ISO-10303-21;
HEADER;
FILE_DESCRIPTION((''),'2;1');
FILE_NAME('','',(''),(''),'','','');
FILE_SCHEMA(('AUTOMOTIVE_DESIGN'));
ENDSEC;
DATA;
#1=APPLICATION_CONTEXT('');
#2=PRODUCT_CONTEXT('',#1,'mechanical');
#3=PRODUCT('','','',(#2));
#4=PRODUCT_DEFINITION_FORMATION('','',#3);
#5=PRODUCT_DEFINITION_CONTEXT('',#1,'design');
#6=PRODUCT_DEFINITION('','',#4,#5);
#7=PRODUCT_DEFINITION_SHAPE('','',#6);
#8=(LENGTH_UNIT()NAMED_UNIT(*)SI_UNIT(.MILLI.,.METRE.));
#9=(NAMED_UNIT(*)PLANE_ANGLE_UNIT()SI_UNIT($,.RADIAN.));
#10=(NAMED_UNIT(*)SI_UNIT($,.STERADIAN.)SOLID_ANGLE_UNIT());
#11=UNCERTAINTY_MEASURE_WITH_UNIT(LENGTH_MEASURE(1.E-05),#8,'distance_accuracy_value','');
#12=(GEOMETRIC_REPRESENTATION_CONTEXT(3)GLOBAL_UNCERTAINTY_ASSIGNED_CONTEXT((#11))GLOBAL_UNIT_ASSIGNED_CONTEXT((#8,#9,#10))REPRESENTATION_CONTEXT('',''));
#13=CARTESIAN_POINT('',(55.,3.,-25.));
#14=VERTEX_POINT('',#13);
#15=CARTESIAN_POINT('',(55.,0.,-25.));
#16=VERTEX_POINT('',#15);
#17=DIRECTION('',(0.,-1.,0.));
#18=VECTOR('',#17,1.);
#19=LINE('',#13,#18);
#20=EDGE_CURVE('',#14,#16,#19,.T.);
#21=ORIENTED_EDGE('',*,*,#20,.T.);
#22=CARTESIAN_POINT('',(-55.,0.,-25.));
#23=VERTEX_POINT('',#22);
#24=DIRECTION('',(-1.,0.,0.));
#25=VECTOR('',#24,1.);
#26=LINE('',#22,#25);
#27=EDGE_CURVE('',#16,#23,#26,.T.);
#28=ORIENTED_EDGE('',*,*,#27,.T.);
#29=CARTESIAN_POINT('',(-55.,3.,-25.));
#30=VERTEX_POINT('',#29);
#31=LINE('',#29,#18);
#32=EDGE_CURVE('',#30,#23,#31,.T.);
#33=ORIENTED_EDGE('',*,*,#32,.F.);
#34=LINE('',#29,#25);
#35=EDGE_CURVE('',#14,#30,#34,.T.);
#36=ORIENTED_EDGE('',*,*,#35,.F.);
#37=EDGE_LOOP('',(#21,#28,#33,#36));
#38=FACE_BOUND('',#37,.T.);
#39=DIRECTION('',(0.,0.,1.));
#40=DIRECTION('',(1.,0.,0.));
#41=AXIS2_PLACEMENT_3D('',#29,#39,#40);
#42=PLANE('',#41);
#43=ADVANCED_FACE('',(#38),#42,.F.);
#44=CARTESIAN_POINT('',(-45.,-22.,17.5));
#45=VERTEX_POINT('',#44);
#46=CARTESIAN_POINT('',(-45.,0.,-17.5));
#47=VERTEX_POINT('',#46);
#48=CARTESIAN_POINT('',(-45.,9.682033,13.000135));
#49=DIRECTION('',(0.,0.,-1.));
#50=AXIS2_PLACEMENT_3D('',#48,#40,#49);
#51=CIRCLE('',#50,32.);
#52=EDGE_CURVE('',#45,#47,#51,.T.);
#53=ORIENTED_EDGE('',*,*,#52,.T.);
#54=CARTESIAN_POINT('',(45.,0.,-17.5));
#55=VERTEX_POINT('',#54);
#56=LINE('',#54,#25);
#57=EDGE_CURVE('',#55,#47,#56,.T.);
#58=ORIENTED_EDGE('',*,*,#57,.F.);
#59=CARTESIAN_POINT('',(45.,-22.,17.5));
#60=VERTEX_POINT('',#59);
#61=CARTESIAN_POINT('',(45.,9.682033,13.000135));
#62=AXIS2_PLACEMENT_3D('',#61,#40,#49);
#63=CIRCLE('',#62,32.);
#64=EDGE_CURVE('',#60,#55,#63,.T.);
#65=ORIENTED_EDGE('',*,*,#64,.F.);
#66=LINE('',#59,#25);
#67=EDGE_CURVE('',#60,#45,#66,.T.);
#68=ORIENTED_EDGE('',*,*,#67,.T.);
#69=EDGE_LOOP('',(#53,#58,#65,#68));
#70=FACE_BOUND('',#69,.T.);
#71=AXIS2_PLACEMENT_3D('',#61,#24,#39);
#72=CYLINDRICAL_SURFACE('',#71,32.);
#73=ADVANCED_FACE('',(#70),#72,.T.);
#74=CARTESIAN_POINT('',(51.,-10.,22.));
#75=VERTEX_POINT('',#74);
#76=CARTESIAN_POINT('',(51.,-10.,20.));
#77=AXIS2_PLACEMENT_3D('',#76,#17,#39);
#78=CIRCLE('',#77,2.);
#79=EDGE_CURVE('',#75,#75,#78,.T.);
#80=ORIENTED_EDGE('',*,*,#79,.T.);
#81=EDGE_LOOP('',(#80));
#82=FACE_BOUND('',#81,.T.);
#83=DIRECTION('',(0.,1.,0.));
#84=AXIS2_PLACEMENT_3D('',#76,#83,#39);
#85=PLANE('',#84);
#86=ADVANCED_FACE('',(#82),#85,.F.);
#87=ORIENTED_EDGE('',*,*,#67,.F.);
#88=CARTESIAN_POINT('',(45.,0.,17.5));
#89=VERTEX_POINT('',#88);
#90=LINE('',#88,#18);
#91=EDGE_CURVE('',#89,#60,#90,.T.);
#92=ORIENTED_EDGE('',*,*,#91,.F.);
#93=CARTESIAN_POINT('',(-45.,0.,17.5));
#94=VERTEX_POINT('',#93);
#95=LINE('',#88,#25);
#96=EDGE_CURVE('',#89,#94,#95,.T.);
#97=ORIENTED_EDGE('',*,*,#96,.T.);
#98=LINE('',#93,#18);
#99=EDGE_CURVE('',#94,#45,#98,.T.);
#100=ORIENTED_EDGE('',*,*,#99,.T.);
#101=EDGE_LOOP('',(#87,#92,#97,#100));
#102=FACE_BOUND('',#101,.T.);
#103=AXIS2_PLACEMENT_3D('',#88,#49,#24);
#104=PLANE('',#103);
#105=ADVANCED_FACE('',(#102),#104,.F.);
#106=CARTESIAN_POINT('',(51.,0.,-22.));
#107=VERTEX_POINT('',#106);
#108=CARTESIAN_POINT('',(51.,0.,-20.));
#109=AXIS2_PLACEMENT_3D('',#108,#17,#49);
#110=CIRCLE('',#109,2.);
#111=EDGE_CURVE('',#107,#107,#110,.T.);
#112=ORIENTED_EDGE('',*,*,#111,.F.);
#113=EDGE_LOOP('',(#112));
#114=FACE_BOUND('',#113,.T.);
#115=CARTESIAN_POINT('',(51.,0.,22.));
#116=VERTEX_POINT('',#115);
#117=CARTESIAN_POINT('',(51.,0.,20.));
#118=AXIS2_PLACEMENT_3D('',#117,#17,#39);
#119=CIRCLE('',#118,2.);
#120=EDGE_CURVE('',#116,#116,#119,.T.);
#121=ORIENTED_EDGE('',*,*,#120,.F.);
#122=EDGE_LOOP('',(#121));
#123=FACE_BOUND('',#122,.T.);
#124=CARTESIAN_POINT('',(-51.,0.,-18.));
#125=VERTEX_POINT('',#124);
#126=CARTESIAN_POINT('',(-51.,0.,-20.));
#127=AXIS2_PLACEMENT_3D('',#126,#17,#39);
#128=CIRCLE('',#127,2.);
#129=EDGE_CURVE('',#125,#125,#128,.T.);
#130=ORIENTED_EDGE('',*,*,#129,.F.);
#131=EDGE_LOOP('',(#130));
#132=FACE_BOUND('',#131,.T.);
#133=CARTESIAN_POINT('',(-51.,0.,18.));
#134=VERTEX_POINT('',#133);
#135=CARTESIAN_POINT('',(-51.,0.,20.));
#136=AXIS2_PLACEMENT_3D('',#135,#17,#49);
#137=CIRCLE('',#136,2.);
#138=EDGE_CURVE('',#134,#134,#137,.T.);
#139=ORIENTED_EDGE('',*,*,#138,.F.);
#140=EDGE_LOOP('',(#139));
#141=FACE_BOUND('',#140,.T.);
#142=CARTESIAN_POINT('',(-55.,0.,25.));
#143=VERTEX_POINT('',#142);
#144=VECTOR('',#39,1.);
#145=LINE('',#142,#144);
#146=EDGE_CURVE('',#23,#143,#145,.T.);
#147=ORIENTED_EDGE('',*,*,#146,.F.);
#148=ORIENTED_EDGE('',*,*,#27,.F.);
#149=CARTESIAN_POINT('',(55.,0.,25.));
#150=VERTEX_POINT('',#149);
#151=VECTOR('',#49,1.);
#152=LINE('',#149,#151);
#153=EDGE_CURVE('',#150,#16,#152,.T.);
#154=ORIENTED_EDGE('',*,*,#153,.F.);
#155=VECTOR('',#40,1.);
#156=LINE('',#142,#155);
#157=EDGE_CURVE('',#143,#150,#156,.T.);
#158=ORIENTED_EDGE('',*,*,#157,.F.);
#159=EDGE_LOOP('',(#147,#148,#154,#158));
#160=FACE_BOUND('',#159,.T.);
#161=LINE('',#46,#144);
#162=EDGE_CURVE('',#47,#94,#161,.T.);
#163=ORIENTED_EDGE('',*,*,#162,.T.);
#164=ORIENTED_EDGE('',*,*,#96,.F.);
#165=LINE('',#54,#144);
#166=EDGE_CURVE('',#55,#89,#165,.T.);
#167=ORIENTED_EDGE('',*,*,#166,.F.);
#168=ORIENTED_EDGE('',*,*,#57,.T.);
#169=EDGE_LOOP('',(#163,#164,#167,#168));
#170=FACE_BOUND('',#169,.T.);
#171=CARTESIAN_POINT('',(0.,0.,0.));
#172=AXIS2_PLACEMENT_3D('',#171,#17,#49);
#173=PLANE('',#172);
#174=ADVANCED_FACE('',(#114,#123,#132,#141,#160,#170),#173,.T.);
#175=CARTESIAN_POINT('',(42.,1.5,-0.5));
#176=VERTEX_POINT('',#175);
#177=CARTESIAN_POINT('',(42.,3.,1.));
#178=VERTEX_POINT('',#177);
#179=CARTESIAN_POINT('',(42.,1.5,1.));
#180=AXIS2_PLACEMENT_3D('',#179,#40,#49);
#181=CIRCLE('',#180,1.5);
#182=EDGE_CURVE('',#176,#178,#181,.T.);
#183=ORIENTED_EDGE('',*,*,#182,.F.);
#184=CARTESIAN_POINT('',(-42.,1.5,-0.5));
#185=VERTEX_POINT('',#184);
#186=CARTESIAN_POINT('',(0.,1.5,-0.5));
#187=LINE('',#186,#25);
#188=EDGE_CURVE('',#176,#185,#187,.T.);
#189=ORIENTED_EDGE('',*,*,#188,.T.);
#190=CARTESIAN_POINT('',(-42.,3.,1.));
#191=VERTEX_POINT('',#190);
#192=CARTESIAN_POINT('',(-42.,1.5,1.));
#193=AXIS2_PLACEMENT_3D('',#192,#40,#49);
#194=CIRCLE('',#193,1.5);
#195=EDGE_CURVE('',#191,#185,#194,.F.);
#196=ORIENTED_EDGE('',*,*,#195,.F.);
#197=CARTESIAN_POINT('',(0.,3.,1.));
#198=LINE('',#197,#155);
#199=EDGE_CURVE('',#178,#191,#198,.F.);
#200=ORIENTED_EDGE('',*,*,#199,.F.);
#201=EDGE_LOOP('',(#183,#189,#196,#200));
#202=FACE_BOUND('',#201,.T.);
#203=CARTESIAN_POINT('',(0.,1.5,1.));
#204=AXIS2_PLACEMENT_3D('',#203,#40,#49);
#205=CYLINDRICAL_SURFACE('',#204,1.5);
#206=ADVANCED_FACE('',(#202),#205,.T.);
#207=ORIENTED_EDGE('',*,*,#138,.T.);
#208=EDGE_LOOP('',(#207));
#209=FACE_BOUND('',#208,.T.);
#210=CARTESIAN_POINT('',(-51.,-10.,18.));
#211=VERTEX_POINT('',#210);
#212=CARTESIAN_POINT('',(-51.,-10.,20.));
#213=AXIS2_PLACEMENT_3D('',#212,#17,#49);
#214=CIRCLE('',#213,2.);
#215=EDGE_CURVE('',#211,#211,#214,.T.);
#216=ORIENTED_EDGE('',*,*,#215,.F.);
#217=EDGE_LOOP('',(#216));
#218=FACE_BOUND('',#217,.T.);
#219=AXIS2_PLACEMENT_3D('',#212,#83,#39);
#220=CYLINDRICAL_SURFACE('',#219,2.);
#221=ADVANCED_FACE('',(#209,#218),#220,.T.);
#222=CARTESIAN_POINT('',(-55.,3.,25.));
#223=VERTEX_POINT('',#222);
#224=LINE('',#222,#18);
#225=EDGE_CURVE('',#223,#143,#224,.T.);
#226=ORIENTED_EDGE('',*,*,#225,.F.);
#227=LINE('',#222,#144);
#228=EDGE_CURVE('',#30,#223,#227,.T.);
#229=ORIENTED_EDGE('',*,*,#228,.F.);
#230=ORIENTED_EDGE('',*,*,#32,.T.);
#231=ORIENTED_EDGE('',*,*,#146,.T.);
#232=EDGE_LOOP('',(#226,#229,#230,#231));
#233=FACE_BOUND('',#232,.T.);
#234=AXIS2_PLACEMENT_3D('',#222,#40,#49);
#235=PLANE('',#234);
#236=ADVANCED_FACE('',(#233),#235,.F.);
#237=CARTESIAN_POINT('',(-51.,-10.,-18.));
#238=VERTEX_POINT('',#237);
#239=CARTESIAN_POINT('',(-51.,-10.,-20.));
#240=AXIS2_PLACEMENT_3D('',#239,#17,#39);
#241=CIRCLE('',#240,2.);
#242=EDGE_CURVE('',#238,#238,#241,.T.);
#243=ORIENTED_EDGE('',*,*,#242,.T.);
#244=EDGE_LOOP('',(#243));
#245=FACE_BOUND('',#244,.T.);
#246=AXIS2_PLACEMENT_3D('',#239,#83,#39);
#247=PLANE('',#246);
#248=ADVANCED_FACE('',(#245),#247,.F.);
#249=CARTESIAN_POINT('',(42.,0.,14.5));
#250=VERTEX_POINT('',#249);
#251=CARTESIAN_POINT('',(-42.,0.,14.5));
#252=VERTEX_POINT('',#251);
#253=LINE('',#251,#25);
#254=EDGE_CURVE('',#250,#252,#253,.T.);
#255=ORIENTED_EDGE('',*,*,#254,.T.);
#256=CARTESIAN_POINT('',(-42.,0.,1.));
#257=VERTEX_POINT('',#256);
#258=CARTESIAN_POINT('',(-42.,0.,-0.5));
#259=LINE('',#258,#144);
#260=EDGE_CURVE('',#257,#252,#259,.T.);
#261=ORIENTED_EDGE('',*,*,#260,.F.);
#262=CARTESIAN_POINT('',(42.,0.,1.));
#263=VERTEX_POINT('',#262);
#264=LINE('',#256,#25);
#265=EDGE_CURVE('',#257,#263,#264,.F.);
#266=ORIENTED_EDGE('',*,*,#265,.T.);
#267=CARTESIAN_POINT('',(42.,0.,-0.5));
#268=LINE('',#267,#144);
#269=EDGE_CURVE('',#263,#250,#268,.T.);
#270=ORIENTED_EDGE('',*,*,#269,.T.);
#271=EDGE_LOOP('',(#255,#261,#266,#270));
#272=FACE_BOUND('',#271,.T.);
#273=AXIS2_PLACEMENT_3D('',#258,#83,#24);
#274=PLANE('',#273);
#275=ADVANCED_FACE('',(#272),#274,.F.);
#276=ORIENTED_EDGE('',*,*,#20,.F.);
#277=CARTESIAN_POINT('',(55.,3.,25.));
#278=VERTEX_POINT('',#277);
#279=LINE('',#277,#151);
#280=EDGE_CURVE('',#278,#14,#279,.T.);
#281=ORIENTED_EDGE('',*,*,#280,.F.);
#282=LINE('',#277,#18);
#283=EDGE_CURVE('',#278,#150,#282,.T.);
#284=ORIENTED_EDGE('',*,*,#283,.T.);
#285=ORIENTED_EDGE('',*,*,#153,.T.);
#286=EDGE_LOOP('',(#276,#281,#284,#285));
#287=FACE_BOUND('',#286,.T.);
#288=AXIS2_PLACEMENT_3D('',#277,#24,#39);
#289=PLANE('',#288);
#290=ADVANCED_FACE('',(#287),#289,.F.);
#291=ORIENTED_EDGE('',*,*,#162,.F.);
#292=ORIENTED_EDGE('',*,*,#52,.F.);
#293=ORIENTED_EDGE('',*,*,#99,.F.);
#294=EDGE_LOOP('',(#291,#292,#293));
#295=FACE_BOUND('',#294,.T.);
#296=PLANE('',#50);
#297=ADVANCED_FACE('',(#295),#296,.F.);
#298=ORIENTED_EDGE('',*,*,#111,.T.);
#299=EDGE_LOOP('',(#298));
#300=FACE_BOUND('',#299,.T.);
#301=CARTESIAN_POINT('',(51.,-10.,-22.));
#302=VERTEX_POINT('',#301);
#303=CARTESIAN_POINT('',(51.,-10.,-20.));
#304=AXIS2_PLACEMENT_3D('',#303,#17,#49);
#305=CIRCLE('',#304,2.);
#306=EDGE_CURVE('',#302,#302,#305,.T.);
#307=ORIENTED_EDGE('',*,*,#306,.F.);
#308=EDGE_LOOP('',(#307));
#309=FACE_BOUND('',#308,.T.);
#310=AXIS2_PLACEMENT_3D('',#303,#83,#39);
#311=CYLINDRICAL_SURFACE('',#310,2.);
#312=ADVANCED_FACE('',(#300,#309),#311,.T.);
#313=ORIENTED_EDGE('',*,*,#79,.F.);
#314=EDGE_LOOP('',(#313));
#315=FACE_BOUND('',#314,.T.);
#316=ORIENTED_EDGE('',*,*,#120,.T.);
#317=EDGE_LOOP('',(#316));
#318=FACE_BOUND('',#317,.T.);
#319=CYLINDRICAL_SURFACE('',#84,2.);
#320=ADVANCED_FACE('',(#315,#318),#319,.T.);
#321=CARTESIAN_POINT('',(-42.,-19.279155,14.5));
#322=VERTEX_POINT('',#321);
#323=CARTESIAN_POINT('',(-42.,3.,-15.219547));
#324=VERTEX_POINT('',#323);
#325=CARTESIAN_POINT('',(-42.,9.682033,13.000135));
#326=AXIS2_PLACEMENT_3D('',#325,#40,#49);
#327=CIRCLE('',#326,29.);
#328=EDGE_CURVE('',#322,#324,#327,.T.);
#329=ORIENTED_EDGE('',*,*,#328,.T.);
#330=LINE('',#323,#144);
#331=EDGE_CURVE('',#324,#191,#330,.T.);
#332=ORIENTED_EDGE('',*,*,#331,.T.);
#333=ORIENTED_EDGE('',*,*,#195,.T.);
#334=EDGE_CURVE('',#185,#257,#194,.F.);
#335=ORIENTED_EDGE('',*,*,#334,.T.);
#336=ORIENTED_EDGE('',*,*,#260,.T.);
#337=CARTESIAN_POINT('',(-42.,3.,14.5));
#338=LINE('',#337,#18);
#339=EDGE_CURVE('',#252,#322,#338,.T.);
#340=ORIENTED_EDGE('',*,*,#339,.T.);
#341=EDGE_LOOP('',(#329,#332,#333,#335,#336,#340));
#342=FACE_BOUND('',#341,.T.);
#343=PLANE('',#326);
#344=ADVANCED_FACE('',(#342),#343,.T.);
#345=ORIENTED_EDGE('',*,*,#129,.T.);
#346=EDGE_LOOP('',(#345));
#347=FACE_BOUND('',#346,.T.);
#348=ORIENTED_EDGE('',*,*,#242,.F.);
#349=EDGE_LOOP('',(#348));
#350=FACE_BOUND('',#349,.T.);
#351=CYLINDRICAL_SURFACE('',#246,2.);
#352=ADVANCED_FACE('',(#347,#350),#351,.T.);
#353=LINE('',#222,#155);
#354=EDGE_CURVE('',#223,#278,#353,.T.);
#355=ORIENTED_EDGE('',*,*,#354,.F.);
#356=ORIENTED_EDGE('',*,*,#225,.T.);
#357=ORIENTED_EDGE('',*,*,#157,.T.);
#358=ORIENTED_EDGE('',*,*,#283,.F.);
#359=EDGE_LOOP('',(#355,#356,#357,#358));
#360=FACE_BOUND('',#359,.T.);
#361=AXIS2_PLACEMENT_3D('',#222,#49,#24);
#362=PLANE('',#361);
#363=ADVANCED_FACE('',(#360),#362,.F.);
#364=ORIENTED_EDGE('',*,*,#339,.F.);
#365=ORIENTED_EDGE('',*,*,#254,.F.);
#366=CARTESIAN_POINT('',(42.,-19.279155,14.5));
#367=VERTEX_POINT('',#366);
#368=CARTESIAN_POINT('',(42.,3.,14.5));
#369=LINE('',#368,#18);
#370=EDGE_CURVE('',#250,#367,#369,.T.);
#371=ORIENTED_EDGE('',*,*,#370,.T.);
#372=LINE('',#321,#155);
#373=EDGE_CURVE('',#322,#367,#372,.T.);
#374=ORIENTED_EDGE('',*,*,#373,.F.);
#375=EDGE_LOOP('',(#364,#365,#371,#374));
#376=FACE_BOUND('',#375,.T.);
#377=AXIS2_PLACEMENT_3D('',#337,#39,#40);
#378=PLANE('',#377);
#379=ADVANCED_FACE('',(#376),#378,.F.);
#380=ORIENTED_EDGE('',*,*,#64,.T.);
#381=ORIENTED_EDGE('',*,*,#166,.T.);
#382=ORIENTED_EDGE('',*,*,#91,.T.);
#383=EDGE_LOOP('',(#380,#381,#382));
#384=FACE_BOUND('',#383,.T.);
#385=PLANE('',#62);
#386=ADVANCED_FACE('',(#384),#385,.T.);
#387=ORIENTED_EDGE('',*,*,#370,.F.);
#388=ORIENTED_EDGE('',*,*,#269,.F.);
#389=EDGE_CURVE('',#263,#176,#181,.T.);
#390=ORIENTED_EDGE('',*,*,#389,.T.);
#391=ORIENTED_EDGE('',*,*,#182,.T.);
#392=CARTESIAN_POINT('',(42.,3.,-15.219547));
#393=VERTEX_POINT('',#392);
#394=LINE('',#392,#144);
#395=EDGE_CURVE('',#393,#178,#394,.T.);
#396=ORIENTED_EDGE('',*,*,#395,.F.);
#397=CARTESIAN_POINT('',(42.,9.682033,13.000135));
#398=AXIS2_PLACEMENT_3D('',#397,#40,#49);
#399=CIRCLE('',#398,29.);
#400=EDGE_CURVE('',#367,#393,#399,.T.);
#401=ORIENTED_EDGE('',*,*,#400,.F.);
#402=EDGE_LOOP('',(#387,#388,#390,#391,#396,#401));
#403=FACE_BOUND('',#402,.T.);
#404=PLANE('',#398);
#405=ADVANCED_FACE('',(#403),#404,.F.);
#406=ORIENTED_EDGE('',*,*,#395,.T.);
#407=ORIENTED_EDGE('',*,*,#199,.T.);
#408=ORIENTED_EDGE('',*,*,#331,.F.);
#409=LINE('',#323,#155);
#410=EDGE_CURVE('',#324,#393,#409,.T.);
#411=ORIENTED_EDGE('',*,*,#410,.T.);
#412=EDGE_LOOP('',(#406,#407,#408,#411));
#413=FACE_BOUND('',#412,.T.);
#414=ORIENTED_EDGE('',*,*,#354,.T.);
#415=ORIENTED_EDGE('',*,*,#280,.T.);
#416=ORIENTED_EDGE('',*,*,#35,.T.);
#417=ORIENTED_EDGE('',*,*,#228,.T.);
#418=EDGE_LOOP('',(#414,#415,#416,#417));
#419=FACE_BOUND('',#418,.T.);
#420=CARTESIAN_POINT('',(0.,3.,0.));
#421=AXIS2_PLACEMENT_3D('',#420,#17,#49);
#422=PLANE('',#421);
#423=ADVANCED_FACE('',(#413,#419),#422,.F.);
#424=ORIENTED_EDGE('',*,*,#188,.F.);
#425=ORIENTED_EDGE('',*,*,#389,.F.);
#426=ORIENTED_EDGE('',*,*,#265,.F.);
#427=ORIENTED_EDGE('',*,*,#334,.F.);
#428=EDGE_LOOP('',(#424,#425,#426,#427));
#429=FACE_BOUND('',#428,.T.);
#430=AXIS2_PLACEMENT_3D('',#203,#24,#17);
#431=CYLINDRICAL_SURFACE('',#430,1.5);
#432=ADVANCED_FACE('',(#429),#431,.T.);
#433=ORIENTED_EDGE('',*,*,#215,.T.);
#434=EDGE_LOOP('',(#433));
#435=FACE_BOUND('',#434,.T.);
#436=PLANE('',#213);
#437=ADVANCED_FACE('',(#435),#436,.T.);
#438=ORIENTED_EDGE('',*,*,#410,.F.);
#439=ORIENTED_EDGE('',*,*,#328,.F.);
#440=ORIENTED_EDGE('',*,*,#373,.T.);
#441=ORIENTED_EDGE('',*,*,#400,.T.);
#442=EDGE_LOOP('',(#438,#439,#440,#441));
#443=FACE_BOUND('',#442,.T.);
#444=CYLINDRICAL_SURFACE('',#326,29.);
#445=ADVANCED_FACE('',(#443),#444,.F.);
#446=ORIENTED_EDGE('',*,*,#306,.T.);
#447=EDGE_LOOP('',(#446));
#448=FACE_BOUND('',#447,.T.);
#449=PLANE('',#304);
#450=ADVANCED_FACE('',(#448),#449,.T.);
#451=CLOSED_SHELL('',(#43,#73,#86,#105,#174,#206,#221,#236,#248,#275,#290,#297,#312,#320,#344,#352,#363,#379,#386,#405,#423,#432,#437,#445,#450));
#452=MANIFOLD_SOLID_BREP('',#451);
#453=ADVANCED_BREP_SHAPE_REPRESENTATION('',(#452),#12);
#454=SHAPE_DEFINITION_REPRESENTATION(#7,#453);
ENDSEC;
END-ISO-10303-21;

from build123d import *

# Parameters (mm, degrees)
SKETCH_1_W          = 110
SKETCH_1_H          = 50
EXTRUDE_1_DEPTH     = 3
EXTRUDE_2_DEPTH     = 45
SKETCH_6_R          = 2
EXTRUDE_986_DEPTH   = 10
CUT_EXTRUDE_1_DEPTH = 42
SKETCH_8_W          = 84
SKETCH_8_H          = 3
EXTRUDE_3_DEPTH     = 15
FILLET_1_R          = 1.5


with BuildPart() as part:
    # 草图1 → 凸台-拉伸1 (new body)
    with BuildSketch(Plane(origin=(0, 0, 0), x_dir=(1, 0, 0), z_dir=(0, 1, 0))):
        Rectangle(SKETCH_1_W, SKETCH_1_H)
    extrude(amount=EXTRUDE_1_DEPTH)

    # 草图2 → 凸台-拉伸2 (add, symmetric)
    with BuildSketch(Plane(origin=(0, 0, 0), x_dir=(0, 0, -1), z_dir=(1, 0, 0))):
        with BuildLine():
            Line((-17.5, 0), (-17.5, -22))
            ThreePointArc((-17.5, -22), (4.029354416, -17.410336571), (17.5, 0))
            Line((17.5, 0), (-17.5, 0))
        make_face()
    extrude(amount=EXTRUDE_2_DEPTH, both=True)

    # 草图6 → Extrude 986 (add)
    with BuildSketch(Plane.XZ):
        with Locations(Location((-51, 20, 0), (0, 0, 270))):
            Circle(SKETCH_6_R)
        with Locations(Location((-51, -20, 0), (0, 0, 90))):
            Circle(SKETCH_6_R)
        with Locations(Location((51, 20, 0), (0, 0, 90))):
            Circle(SKETCH_6_R)
        with Locations(Location((51, -20, 0), (0, 0, 270))):
            Circle(SKETCH_6_R)
    extrude(amount=EXTRUDE_986_DEPTH)

    # 草图7 → 切除-拉伸1 (cut, symmetric)
    with BuildSketch(Plane(origin=(0, 0, 0), x_dir=(0, 0, -1), z_dir=(1, 0, 0))):
        with BuildLine():
            Line((-14.5, 3), (-14.5, -19.279154905))
            ThreePointArc((-14.5, -19.279154905), (4.394615248, -13.521903359), (15.219546663, 3))
            Line((15.219546663, 3), (-14.5, 3))
        make_face()
    extrude(amount=CUT_EXTRUDE_1_DEPTH, both=True, mode=Mode.SUBTRACT)

    # 草图8 → 凸台-拉伸3 (add)
    with BuildSketch(Plane(origin=(0, 0, 14.5), x_dir=(-1, 0, 0), z_dir=(0, 0, -1))):
        with Locations((0, 1.5)):
            Rectangle(SKETCH_8_W, SKETCH_8_H)
    extrude(amount=EXTRUDE_3_DEPTH)

    # 圆角1
    fillet_1_edges = [part.edges().sort_by_distance(p)[0] for p in [
        (0, 0, -0.5),
        (0, 3, -0.5),
    ]]
    fillet(fillet_1_edges, radius=FILLET_1_R - 0.0001)  # a hair under: the kernel refuses the full size


solid = part.part
